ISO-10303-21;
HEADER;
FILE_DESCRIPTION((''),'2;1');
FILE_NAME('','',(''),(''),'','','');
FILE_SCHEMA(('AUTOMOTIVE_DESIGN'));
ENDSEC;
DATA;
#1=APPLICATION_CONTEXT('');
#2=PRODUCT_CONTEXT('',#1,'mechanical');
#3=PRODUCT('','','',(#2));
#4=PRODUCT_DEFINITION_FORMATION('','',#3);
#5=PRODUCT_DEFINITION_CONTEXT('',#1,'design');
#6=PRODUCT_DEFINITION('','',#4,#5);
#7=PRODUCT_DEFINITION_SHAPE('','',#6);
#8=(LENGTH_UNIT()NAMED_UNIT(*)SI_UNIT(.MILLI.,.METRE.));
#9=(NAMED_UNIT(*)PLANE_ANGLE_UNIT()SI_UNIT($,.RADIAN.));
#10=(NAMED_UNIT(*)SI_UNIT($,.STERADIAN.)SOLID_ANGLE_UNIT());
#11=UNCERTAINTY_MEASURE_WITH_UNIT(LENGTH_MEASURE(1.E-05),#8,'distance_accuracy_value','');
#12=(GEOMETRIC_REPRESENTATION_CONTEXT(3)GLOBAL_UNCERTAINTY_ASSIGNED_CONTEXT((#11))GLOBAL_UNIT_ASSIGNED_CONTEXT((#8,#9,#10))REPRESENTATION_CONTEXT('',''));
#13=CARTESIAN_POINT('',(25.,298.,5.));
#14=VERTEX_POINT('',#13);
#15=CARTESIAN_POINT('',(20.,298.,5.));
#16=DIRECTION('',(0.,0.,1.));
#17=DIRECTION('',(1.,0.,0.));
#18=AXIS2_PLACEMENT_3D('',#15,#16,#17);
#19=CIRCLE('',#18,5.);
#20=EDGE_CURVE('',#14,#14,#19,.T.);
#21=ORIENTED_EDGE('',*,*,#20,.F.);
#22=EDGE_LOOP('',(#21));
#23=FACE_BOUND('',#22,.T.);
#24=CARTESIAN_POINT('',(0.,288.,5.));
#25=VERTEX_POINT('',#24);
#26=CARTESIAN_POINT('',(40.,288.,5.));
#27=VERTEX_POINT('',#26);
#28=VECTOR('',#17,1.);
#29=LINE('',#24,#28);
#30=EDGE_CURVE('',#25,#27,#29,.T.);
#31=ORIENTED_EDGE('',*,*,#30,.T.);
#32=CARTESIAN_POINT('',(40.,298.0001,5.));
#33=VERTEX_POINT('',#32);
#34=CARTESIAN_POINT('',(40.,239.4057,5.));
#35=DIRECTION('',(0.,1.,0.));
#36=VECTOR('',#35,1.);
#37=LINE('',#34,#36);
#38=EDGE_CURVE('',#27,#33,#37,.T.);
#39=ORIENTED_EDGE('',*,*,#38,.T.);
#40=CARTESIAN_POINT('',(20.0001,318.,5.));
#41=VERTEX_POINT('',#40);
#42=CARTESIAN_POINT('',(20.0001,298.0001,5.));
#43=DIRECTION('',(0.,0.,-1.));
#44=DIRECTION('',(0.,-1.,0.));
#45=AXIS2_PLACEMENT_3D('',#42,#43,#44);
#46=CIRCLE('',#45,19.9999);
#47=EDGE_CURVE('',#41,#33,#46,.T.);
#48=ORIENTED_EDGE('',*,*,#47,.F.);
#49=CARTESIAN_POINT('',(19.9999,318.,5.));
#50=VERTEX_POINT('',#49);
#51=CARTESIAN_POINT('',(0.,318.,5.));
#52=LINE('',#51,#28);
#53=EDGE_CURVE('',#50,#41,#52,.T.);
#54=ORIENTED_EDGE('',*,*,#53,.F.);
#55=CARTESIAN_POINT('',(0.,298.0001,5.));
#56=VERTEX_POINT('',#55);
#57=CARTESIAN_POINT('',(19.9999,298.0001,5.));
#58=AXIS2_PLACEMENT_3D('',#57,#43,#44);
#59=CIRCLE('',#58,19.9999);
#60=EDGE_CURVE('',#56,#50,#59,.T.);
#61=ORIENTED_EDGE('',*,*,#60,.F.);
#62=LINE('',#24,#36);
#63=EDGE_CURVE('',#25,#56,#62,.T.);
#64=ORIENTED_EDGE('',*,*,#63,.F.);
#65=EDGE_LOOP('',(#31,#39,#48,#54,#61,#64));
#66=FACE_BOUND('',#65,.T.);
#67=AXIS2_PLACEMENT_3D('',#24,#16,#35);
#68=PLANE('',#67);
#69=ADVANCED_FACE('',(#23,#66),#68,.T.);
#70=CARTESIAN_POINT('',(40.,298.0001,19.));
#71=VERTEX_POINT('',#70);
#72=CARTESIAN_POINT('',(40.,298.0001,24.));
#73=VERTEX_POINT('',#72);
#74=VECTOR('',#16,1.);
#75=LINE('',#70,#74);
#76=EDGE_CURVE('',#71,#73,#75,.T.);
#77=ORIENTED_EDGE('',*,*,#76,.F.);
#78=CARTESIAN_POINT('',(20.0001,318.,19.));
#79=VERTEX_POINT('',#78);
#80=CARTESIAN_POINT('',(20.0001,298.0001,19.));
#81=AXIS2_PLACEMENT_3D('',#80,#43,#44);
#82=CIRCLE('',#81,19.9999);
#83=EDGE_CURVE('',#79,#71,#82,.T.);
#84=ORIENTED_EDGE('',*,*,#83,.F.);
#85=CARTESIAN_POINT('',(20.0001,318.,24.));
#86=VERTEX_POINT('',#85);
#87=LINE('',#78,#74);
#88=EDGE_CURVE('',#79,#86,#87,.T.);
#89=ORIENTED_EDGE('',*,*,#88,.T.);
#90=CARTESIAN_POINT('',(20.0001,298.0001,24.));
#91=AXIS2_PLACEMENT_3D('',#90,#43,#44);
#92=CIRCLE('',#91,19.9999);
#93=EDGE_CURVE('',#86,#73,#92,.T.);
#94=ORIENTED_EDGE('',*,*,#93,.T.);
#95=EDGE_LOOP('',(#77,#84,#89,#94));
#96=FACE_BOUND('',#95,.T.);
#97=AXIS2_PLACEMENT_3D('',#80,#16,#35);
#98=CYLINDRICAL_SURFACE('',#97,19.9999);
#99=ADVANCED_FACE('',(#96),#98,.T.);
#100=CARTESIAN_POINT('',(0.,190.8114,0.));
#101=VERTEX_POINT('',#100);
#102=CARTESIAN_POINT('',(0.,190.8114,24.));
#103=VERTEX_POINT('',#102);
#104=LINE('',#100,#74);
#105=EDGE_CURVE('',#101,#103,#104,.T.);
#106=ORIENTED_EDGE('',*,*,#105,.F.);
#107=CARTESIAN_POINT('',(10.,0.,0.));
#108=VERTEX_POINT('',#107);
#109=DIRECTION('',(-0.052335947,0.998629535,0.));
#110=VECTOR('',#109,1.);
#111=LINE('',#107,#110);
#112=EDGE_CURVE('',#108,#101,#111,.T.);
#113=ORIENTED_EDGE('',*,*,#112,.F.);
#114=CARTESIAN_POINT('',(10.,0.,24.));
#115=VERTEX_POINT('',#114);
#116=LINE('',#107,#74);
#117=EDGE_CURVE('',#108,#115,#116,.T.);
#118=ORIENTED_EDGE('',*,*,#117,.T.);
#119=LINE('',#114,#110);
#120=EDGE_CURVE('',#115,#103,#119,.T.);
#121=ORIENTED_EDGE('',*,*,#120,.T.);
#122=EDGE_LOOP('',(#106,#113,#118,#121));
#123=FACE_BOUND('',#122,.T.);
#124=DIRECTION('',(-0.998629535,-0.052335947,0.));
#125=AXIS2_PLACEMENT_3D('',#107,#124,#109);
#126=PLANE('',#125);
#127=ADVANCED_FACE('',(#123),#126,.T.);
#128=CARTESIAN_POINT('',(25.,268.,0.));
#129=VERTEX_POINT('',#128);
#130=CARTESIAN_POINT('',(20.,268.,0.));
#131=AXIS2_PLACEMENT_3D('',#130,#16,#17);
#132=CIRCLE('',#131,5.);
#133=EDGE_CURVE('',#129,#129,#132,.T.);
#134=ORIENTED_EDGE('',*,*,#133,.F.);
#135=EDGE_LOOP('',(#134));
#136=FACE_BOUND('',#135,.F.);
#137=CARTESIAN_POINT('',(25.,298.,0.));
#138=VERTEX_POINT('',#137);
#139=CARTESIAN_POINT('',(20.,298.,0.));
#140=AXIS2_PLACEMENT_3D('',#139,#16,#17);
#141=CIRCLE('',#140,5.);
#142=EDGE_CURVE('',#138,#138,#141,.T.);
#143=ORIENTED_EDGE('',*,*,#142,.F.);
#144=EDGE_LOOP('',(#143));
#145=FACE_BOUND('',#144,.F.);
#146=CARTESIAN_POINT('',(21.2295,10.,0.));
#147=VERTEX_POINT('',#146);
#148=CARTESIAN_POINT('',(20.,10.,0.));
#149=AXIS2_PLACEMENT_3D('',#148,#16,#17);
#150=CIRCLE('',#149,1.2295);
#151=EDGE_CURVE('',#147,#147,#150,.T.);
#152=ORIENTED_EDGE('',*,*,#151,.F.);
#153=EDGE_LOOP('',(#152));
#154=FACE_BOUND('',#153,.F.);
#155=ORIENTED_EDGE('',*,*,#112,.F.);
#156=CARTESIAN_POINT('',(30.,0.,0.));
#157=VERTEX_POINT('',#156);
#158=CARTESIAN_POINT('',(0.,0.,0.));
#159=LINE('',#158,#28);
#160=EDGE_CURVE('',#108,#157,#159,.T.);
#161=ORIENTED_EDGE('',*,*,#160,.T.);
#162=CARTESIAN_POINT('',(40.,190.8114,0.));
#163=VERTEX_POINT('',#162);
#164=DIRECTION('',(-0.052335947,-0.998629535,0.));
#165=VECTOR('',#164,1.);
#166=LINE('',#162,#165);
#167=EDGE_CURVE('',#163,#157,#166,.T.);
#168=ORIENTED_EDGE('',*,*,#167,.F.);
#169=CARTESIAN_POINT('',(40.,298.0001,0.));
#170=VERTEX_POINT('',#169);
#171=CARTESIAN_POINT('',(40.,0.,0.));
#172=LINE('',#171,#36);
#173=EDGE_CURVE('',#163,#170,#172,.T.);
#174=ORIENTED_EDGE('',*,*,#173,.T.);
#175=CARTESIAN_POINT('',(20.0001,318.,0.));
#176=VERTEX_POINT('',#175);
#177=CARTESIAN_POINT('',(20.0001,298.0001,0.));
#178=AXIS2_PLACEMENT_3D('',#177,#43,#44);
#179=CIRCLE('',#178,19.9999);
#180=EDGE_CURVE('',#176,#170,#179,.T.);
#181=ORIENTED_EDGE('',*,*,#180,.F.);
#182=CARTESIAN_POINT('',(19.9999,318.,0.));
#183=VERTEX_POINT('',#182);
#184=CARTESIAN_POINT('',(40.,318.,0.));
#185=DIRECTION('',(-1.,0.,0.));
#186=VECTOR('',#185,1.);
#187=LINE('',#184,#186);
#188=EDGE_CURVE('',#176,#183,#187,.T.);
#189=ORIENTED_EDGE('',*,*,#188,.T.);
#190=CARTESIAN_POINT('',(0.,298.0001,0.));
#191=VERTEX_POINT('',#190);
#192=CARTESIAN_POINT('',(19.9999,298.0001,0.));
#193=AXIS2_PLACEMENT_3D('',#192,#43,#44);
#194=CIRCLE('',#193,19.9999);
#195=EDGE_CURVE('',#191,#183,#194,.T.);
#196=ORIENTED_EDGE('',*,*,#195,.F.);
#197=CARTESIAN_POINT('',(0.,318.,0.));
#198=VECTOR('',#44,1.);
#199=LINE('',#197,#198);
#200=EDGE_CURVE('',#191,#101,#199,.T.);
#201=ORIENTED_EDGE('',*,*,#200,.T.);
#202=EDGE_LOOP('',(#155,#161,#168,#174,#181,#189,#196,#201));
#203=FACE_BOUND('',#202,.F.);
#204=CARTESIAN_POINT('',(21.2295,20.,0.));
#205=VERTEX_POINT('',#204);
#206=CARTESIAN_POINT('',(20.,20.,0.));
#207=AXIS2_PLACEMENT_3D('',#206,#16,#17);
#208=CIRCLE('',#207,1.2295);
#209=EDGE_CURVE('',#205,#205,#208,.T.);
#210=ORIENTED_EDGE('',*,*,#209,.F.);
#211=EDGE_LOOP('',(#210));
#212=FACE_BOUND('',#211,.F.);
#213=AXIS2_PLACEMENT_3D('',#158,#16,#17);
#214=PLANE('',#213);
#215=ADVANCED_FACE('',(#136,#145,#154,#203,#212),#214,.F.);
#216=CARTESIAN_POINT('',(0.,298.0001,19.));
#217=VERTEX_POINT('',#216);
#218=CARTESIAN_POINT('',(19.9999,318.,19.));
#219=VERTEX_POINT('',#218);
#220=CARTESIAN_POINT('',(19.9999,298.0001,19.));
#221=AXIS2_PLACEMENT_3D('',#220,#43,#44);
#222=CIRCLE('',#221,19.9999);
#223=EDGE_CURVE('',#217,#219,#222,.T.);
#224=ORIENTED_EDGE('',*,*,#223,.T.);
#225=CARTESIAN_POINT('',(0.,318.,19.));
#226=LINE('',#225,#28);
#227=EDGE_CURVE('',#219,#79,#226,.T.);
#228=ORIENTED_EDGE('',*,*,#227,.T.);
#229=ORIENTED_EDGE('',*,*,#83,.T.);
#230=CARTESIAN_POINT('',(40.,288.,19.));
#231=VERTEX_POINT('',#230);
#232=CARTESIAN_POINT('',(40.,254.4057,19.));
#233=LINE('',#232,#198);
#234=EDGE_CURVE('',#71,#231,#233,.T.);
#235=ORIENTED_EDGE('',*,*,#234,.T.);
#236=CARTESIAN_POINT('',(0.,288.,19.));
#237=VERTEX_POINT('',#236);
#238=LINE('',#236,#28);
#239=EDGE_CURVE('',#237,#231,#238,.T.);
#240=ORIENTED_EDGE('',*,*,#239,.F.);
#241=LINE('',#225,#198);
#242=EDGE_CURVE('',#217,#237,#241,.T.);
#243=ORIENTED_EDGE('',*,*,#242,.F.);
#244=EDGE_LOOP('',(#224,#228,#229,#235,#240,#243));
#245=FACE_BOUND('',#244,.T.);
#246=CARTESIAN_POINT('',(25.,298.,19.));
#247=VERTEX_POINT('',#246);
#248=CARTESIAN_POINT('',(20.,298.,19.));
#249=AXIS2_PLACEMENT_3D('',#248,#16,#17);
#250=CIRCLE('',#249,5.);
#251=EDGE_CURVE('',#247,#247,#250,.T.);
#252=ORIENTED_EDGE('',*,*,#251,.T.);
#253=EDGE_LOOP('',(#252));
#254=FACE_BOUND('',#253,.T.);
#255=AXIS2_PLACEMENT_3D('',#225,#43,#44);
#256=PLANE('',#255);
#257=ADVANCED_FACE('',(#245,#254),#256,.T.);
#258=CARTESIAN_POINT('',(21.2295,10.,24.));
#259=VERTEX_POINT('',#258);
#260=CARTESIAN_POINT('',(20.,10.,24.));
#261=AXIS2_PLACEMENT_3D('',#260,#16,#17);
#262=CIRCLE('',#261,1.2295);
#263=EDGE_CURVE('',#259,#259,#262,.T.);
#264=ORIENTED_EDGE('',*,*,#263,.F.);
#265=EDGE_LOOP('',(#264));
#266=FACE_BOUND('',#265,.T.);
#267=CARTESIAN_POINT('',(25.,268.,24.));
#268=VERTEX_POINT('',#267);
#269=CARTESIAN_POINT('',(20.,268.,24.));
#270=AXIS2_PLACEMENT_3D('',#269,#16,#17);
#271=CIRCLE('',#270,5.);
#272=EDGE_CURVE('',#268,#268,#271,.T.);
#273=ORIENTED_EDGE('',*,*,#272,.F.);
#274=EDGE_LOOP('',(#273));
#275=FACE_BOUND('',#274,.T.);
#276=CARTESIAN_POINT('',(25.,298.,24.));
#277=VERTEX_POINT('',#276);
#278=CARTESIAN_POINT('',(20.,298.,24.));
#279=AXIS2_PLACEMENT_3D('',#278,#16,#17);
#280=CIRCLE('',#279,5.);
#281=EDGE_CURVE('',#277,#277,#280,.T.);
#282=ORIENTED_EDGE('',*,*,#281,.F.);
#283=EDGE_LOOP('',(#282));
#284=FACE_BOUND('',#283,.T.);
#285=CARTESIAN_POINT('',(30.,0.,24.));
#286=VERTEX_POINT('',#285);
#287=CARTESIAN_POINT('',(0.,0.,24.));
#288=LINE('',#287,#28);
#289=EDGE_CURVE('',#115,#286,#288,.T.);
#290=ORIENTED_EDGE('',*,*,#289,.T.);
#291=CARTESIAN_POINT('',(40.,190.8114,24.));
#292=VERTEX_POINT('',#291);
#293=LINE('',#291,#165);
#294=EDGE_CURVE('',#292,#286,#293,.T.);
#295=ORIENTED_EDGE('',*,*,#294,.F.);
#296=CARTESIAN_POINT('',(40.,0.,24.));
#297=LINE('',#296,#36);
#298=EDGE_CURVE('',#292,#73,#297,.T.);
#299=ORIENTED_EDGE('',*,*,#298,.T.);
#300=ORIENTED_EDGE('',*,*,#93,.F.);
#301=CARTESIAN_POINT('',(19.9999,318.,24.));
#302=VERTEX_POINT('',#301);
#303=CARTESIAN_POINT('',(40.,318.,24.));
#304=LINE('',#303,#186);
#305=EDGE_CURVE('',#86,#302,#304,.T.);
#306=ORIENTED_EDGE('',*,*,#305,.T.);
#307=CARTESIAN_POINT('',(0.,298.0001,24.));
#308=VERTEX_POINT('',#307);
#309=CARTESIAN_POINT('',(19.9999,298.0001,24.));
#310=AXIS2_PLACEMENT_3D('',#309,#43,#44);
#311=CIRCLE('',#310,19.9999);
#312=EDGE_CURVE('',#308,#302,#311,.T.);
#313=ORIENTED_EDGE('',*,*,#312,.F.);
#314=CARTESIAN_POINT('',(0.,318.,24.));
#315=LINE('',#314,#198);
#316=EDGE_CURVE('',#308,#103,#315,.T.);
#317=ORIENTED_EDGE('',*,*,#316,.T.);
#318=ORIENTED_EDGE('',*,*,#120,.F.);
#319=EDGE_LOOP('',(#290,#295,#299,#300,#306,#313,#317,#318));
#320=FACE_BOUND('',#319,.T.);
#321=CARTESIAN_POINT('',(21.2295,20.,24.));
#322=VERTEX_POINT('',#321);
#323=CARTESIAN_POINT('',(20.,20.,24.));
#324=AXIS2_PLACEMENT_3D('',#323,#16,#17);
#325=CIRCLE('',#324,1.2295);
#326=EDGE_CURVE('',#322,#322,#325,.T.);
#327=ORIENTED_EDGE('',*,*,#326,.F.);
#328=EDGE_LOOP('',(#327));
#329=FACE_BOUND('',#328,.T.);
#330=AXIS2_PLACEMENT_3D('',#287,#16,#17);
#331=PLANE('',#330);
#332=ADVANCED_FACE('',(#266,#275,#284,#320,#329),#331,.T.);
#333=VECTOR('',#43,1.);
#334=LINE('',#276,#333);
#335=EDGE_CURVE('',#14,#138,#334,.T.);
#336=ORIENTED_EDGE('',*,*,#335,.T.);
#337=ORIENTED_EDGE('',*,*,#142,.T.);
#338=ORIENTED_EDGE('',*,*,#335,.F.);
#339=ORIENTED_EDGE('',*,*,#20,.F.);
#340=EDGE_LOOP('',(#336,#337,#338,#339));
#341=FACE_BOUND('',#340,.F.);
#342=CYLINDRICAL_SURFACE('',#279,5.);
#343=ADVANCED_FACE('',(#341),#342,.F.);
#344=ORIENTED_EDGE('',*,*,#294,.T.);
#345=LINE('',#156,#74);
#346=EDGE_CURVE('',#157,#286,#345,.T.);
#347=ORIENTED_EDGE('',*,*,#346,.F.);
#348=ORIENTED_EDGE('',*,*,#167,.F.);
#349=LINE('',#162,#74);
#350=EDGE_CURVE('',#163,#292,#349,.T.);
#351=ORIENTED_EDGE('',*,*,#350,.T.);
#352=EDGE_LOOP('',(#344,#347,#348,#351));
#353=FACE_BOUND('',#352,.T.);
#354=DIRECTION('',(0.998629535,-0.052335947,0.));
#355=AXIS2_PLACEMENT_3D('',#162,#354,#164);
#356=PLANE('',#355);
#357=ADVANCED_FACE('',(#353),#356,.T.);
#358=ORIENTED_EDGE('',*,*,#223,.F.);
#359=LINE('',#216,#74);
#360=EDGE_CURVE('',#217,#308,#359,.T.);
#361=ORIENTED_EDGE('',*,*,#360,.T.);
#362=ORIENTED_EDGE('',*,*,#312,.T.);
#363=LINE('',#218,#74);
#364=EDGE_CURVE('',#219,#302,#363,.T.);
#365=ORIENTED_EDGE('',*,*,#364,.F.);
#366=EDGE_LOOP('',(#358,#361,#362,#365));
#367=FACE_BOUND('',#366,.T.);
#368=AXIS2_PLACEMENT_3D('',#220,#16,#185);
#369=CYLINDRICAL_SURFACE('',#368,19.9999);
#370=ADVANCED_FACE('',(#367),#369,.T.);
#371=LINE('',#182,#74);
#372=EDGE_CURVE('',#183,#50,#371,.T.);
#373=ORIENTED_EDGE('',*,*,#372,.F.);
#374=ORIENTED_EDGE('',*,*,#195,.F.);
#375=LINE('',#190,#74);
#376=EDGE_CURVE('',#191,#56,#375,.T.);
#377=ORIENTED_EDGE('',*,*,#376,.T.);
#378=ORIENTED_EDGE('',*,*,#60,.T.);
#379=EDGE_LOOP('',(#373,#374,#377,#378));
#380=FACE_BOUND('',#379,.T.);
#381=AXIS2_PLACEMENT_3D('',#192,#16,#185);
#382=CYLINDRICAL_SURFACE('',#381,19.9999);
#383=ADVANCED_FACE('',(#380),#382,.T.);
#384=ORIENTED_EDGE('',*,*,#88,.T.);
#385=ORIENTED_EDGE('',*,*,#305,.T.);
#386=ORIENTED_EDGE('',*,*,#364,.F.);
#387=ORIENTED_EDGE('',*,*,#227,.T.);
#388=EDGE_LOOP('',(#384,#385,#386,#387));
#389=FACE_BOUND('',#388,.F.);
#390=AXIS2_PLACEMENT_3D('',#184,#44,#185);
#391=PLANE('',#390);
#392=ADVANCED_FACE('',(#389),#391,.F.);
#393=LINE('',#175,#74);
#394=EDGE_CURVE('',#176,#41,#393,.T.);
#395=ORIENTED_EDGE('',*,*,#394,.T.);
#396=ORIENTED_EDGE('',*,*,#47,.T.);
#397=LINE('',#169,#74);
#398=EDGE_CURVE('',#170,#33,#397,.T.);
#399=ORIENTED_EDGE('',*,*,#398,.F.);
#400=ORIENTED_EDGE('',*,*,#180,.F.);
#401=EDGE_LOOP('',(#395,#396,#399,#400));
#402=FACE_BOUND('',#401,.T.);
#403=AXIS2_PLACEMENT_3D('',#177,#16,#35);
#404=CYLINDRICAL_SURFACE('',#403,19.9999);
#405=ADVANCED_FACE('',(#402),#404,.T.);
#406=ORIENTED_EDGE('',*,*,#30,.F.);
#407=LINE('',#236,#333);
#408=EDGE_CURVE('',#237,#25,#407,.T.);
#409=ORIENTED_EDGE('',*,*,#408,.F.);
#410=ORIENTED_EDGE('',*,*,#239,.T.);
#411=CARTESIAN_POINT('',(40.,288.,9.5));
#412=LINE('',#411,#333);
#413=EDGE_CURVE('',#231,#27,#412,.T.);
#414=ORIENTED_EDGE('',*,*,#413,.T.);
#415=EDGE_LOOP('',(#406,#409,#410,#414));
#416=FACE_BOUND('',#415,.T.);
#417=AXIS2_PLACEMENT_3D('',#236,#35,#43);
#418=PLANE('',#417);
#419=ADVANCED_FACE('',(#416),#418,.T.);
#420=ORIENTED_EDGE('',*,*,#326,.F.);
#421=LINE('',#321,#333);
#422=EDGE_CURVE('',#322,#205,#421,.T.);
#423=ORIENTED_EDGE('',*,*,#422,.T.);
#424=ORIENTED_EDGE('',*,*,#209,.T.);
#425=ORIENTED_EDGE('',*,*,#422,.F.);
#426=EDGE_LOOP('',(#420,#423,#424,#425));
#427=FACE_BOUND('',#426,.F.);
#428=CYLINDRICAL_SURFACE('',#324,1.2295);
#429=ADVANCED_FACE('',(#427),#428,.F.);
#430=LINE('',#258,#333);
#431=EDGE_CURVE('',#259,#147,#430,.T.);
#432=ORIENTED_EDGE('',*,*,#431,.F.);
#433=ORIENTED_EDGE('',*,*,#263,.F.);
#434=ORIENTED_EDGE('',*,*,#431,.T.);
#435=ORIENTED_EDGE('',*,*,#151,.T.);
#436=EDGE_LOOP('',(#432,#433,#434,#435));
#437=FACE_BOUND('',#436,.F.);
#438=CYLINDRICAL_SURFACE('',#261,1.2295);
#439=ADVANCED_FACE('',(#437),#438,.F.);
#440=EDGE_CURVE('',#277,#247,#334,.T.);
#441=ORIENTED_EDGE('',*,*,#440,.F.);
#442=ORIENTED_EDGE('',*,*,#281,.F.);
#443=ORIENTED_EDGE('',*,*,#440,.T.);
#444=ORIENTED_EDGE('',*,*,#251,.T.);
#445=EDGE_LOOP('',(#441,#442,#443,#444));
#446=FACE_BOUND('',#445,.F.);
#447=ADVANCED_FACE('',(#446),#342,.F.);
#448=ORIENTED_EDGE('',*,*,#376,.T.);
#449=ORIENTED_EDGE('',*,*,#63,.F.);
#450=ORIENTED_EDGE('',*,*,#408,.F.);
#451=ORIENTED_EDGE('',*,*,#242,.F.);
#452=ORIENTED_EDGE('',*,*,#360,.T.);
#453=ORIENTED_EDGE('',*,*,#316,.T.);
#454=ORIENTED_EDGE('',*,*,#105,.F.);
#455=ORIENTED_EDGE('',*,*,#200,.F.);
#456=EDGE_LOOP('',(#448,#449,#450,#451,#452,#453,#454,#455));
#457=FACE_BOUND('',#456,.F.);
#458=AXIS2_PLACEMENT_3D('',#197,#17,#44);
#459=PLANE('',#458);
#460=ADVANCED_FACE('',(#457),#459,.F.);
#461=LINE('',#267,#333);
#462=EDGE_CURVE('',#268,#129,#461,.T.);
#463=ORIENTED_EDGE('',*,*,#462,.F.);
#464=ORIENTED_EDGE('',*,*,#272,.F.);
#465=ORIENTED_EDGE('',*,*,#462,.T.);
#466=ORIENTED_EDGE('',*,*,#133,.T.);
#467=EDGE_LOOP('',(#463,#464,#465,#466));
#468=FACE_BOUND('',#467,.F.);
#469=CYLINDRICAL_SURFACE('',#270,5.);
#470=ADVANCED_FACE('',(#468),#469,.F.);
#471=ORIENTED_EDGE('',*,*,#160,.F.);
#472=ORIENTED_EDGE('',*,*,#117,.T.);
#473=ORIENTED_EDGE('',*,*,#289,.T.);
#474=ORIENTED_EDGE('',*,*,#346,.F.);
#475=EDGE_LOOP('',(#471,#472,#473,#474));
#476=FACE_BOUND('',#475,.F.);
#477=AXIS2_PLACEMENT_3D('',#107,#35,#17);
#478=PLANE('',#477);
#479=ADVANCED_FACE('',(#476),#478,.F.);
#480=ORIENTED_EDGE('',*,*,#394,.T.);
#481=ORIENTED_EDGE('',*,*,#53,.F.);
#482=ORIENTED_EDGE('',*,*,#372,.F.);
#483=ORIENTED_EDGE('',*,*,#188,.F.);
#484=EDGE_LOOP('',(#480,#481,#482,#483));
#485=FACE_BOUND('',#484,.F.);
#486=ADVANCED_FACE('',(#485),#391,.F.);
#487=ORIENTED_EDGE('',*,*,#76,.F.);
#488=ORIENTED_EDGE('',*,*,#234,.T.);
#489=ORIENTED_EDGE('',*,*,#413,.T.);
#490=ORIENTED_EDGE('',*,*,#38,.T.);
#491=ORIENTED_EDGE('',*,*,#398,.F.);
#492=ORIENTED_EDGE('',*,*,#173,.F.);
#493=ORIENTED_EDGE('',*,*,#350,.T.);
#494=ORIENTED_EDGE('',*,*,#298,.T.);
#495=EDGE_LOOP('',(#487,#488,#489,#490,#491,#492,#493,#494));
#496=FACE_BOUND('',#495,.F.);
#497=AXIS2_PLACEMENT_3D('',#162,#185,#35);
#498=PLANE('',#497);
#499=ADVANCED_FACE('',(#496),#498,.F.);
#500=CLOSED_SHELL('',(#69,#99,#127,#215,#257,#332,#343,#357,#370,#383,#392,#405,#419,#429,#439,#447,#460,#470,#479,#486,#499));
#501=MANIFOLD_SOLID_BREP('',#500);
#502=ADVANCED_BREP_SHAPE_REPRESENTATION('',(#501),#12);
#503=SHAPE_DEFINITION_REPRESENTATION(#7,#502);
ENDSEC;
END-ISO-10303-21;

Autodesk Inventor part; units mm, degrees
ref_plane "YZ Plane" through (0, 0, 0) normal (1, 0, 0) x (0, 1, 0)
ref_plane "XZ Plane" through (0, 0, 0) normal (0, 1, 0) x (-1, 0, 0)
ref_plane "XY Plane" through (0, 0, 0) normal (0, 0, 1) x (1, 0, 0)
sketch "スケッチ1" plane through (0, 0, 0) normal (0, 0, 1) x (1, 0, 0)
  line L0 (0, 0) -> (40, 0)
  line L1 (40, 0) -> (40, 318)
  line L2 (40, 318) -> (0, 318)
  line L3 (0, 318) -> (0, 0)
  line L4 (10, 0) -> (0, 190.8114)
  line L5 (40, 190.8114) -> (30, 0)
  dimension "d0" = 40
  dimension "d1" = 318
  dimension "d64" = 20
  dimension "d65" = 10
  dimension "d66" = 87
  dimension "d67" = 87
extrude "押し出し1" add sketch "スケッチ1" along normal blind 24 contours L4 L3 L2 L1 L5 L0
sketch "スケッチ6" plane through (0, 0, 24) normal (0, 0, 1) x (1, 0, 0)
  circle A0 centre (20, 268) radius 5
  line L0 (40, 318) -> (0, 318) projected
  line L1 (40, 190.8114) -> (40, 318) projected
  circle A1 centre (20, 20) radius 1.2295
  circle A2 centre (20, 10) radius 1.2295
  line L2 (0, 0) -> (30, 0) projected
  circle A3 centre (20, 298) radius 5
  point P0 (20, 318)
  point P1 (40, 0)
  dimension "d42" = 10
  dimension "d44" = 20
  dimension "d45" = 2.459
  dimension "d46" = 2.459
  dimension "d47" = 10
  dimension "d48" = 10
  dimension "d49" = 20
  dimension "d50" = 20
  dimension "d53" = 10
  dimension "d54" = 20
  dimension "d55" = 30
  dimension "d56" = 20
extrude "押し出し4" cut sketch "スケッチ6" against normal through all
sketch "スケッチ8" plane through (0, 0, 0) normal (-1, 0, 0) x (0, 0, 1)
  line L0 (0, 318) -> (24, 318) projected
  line L1 (5, 318) -> (19, 318)
  line L2 (19, 318) -> (19, 288)
  line L3 (19, 288) -> (5, 288)
  line L4 (5, 288) -> (5, 318)
  line L5 (0, 318) -> (0, 0) projected
  dimension "d57" = 5
  dimension "d58" = 14
  dimension "d59" = 30
extrude "押し出し5" cut sketch "スケッチ8" against normal through all
fillet "フィレット1" radius 20 4 edges at (40, 318, 21.5) (40, 318, 2.5) (0, 318, 2.5) (0, 318, 21.5)
equation "\"d67\" = d66"
equation "\"d45\" = d46"
equation "\"d48\" = d47"
equation "\"d50\" = d49"
properties part number "legparts_06(three)"
